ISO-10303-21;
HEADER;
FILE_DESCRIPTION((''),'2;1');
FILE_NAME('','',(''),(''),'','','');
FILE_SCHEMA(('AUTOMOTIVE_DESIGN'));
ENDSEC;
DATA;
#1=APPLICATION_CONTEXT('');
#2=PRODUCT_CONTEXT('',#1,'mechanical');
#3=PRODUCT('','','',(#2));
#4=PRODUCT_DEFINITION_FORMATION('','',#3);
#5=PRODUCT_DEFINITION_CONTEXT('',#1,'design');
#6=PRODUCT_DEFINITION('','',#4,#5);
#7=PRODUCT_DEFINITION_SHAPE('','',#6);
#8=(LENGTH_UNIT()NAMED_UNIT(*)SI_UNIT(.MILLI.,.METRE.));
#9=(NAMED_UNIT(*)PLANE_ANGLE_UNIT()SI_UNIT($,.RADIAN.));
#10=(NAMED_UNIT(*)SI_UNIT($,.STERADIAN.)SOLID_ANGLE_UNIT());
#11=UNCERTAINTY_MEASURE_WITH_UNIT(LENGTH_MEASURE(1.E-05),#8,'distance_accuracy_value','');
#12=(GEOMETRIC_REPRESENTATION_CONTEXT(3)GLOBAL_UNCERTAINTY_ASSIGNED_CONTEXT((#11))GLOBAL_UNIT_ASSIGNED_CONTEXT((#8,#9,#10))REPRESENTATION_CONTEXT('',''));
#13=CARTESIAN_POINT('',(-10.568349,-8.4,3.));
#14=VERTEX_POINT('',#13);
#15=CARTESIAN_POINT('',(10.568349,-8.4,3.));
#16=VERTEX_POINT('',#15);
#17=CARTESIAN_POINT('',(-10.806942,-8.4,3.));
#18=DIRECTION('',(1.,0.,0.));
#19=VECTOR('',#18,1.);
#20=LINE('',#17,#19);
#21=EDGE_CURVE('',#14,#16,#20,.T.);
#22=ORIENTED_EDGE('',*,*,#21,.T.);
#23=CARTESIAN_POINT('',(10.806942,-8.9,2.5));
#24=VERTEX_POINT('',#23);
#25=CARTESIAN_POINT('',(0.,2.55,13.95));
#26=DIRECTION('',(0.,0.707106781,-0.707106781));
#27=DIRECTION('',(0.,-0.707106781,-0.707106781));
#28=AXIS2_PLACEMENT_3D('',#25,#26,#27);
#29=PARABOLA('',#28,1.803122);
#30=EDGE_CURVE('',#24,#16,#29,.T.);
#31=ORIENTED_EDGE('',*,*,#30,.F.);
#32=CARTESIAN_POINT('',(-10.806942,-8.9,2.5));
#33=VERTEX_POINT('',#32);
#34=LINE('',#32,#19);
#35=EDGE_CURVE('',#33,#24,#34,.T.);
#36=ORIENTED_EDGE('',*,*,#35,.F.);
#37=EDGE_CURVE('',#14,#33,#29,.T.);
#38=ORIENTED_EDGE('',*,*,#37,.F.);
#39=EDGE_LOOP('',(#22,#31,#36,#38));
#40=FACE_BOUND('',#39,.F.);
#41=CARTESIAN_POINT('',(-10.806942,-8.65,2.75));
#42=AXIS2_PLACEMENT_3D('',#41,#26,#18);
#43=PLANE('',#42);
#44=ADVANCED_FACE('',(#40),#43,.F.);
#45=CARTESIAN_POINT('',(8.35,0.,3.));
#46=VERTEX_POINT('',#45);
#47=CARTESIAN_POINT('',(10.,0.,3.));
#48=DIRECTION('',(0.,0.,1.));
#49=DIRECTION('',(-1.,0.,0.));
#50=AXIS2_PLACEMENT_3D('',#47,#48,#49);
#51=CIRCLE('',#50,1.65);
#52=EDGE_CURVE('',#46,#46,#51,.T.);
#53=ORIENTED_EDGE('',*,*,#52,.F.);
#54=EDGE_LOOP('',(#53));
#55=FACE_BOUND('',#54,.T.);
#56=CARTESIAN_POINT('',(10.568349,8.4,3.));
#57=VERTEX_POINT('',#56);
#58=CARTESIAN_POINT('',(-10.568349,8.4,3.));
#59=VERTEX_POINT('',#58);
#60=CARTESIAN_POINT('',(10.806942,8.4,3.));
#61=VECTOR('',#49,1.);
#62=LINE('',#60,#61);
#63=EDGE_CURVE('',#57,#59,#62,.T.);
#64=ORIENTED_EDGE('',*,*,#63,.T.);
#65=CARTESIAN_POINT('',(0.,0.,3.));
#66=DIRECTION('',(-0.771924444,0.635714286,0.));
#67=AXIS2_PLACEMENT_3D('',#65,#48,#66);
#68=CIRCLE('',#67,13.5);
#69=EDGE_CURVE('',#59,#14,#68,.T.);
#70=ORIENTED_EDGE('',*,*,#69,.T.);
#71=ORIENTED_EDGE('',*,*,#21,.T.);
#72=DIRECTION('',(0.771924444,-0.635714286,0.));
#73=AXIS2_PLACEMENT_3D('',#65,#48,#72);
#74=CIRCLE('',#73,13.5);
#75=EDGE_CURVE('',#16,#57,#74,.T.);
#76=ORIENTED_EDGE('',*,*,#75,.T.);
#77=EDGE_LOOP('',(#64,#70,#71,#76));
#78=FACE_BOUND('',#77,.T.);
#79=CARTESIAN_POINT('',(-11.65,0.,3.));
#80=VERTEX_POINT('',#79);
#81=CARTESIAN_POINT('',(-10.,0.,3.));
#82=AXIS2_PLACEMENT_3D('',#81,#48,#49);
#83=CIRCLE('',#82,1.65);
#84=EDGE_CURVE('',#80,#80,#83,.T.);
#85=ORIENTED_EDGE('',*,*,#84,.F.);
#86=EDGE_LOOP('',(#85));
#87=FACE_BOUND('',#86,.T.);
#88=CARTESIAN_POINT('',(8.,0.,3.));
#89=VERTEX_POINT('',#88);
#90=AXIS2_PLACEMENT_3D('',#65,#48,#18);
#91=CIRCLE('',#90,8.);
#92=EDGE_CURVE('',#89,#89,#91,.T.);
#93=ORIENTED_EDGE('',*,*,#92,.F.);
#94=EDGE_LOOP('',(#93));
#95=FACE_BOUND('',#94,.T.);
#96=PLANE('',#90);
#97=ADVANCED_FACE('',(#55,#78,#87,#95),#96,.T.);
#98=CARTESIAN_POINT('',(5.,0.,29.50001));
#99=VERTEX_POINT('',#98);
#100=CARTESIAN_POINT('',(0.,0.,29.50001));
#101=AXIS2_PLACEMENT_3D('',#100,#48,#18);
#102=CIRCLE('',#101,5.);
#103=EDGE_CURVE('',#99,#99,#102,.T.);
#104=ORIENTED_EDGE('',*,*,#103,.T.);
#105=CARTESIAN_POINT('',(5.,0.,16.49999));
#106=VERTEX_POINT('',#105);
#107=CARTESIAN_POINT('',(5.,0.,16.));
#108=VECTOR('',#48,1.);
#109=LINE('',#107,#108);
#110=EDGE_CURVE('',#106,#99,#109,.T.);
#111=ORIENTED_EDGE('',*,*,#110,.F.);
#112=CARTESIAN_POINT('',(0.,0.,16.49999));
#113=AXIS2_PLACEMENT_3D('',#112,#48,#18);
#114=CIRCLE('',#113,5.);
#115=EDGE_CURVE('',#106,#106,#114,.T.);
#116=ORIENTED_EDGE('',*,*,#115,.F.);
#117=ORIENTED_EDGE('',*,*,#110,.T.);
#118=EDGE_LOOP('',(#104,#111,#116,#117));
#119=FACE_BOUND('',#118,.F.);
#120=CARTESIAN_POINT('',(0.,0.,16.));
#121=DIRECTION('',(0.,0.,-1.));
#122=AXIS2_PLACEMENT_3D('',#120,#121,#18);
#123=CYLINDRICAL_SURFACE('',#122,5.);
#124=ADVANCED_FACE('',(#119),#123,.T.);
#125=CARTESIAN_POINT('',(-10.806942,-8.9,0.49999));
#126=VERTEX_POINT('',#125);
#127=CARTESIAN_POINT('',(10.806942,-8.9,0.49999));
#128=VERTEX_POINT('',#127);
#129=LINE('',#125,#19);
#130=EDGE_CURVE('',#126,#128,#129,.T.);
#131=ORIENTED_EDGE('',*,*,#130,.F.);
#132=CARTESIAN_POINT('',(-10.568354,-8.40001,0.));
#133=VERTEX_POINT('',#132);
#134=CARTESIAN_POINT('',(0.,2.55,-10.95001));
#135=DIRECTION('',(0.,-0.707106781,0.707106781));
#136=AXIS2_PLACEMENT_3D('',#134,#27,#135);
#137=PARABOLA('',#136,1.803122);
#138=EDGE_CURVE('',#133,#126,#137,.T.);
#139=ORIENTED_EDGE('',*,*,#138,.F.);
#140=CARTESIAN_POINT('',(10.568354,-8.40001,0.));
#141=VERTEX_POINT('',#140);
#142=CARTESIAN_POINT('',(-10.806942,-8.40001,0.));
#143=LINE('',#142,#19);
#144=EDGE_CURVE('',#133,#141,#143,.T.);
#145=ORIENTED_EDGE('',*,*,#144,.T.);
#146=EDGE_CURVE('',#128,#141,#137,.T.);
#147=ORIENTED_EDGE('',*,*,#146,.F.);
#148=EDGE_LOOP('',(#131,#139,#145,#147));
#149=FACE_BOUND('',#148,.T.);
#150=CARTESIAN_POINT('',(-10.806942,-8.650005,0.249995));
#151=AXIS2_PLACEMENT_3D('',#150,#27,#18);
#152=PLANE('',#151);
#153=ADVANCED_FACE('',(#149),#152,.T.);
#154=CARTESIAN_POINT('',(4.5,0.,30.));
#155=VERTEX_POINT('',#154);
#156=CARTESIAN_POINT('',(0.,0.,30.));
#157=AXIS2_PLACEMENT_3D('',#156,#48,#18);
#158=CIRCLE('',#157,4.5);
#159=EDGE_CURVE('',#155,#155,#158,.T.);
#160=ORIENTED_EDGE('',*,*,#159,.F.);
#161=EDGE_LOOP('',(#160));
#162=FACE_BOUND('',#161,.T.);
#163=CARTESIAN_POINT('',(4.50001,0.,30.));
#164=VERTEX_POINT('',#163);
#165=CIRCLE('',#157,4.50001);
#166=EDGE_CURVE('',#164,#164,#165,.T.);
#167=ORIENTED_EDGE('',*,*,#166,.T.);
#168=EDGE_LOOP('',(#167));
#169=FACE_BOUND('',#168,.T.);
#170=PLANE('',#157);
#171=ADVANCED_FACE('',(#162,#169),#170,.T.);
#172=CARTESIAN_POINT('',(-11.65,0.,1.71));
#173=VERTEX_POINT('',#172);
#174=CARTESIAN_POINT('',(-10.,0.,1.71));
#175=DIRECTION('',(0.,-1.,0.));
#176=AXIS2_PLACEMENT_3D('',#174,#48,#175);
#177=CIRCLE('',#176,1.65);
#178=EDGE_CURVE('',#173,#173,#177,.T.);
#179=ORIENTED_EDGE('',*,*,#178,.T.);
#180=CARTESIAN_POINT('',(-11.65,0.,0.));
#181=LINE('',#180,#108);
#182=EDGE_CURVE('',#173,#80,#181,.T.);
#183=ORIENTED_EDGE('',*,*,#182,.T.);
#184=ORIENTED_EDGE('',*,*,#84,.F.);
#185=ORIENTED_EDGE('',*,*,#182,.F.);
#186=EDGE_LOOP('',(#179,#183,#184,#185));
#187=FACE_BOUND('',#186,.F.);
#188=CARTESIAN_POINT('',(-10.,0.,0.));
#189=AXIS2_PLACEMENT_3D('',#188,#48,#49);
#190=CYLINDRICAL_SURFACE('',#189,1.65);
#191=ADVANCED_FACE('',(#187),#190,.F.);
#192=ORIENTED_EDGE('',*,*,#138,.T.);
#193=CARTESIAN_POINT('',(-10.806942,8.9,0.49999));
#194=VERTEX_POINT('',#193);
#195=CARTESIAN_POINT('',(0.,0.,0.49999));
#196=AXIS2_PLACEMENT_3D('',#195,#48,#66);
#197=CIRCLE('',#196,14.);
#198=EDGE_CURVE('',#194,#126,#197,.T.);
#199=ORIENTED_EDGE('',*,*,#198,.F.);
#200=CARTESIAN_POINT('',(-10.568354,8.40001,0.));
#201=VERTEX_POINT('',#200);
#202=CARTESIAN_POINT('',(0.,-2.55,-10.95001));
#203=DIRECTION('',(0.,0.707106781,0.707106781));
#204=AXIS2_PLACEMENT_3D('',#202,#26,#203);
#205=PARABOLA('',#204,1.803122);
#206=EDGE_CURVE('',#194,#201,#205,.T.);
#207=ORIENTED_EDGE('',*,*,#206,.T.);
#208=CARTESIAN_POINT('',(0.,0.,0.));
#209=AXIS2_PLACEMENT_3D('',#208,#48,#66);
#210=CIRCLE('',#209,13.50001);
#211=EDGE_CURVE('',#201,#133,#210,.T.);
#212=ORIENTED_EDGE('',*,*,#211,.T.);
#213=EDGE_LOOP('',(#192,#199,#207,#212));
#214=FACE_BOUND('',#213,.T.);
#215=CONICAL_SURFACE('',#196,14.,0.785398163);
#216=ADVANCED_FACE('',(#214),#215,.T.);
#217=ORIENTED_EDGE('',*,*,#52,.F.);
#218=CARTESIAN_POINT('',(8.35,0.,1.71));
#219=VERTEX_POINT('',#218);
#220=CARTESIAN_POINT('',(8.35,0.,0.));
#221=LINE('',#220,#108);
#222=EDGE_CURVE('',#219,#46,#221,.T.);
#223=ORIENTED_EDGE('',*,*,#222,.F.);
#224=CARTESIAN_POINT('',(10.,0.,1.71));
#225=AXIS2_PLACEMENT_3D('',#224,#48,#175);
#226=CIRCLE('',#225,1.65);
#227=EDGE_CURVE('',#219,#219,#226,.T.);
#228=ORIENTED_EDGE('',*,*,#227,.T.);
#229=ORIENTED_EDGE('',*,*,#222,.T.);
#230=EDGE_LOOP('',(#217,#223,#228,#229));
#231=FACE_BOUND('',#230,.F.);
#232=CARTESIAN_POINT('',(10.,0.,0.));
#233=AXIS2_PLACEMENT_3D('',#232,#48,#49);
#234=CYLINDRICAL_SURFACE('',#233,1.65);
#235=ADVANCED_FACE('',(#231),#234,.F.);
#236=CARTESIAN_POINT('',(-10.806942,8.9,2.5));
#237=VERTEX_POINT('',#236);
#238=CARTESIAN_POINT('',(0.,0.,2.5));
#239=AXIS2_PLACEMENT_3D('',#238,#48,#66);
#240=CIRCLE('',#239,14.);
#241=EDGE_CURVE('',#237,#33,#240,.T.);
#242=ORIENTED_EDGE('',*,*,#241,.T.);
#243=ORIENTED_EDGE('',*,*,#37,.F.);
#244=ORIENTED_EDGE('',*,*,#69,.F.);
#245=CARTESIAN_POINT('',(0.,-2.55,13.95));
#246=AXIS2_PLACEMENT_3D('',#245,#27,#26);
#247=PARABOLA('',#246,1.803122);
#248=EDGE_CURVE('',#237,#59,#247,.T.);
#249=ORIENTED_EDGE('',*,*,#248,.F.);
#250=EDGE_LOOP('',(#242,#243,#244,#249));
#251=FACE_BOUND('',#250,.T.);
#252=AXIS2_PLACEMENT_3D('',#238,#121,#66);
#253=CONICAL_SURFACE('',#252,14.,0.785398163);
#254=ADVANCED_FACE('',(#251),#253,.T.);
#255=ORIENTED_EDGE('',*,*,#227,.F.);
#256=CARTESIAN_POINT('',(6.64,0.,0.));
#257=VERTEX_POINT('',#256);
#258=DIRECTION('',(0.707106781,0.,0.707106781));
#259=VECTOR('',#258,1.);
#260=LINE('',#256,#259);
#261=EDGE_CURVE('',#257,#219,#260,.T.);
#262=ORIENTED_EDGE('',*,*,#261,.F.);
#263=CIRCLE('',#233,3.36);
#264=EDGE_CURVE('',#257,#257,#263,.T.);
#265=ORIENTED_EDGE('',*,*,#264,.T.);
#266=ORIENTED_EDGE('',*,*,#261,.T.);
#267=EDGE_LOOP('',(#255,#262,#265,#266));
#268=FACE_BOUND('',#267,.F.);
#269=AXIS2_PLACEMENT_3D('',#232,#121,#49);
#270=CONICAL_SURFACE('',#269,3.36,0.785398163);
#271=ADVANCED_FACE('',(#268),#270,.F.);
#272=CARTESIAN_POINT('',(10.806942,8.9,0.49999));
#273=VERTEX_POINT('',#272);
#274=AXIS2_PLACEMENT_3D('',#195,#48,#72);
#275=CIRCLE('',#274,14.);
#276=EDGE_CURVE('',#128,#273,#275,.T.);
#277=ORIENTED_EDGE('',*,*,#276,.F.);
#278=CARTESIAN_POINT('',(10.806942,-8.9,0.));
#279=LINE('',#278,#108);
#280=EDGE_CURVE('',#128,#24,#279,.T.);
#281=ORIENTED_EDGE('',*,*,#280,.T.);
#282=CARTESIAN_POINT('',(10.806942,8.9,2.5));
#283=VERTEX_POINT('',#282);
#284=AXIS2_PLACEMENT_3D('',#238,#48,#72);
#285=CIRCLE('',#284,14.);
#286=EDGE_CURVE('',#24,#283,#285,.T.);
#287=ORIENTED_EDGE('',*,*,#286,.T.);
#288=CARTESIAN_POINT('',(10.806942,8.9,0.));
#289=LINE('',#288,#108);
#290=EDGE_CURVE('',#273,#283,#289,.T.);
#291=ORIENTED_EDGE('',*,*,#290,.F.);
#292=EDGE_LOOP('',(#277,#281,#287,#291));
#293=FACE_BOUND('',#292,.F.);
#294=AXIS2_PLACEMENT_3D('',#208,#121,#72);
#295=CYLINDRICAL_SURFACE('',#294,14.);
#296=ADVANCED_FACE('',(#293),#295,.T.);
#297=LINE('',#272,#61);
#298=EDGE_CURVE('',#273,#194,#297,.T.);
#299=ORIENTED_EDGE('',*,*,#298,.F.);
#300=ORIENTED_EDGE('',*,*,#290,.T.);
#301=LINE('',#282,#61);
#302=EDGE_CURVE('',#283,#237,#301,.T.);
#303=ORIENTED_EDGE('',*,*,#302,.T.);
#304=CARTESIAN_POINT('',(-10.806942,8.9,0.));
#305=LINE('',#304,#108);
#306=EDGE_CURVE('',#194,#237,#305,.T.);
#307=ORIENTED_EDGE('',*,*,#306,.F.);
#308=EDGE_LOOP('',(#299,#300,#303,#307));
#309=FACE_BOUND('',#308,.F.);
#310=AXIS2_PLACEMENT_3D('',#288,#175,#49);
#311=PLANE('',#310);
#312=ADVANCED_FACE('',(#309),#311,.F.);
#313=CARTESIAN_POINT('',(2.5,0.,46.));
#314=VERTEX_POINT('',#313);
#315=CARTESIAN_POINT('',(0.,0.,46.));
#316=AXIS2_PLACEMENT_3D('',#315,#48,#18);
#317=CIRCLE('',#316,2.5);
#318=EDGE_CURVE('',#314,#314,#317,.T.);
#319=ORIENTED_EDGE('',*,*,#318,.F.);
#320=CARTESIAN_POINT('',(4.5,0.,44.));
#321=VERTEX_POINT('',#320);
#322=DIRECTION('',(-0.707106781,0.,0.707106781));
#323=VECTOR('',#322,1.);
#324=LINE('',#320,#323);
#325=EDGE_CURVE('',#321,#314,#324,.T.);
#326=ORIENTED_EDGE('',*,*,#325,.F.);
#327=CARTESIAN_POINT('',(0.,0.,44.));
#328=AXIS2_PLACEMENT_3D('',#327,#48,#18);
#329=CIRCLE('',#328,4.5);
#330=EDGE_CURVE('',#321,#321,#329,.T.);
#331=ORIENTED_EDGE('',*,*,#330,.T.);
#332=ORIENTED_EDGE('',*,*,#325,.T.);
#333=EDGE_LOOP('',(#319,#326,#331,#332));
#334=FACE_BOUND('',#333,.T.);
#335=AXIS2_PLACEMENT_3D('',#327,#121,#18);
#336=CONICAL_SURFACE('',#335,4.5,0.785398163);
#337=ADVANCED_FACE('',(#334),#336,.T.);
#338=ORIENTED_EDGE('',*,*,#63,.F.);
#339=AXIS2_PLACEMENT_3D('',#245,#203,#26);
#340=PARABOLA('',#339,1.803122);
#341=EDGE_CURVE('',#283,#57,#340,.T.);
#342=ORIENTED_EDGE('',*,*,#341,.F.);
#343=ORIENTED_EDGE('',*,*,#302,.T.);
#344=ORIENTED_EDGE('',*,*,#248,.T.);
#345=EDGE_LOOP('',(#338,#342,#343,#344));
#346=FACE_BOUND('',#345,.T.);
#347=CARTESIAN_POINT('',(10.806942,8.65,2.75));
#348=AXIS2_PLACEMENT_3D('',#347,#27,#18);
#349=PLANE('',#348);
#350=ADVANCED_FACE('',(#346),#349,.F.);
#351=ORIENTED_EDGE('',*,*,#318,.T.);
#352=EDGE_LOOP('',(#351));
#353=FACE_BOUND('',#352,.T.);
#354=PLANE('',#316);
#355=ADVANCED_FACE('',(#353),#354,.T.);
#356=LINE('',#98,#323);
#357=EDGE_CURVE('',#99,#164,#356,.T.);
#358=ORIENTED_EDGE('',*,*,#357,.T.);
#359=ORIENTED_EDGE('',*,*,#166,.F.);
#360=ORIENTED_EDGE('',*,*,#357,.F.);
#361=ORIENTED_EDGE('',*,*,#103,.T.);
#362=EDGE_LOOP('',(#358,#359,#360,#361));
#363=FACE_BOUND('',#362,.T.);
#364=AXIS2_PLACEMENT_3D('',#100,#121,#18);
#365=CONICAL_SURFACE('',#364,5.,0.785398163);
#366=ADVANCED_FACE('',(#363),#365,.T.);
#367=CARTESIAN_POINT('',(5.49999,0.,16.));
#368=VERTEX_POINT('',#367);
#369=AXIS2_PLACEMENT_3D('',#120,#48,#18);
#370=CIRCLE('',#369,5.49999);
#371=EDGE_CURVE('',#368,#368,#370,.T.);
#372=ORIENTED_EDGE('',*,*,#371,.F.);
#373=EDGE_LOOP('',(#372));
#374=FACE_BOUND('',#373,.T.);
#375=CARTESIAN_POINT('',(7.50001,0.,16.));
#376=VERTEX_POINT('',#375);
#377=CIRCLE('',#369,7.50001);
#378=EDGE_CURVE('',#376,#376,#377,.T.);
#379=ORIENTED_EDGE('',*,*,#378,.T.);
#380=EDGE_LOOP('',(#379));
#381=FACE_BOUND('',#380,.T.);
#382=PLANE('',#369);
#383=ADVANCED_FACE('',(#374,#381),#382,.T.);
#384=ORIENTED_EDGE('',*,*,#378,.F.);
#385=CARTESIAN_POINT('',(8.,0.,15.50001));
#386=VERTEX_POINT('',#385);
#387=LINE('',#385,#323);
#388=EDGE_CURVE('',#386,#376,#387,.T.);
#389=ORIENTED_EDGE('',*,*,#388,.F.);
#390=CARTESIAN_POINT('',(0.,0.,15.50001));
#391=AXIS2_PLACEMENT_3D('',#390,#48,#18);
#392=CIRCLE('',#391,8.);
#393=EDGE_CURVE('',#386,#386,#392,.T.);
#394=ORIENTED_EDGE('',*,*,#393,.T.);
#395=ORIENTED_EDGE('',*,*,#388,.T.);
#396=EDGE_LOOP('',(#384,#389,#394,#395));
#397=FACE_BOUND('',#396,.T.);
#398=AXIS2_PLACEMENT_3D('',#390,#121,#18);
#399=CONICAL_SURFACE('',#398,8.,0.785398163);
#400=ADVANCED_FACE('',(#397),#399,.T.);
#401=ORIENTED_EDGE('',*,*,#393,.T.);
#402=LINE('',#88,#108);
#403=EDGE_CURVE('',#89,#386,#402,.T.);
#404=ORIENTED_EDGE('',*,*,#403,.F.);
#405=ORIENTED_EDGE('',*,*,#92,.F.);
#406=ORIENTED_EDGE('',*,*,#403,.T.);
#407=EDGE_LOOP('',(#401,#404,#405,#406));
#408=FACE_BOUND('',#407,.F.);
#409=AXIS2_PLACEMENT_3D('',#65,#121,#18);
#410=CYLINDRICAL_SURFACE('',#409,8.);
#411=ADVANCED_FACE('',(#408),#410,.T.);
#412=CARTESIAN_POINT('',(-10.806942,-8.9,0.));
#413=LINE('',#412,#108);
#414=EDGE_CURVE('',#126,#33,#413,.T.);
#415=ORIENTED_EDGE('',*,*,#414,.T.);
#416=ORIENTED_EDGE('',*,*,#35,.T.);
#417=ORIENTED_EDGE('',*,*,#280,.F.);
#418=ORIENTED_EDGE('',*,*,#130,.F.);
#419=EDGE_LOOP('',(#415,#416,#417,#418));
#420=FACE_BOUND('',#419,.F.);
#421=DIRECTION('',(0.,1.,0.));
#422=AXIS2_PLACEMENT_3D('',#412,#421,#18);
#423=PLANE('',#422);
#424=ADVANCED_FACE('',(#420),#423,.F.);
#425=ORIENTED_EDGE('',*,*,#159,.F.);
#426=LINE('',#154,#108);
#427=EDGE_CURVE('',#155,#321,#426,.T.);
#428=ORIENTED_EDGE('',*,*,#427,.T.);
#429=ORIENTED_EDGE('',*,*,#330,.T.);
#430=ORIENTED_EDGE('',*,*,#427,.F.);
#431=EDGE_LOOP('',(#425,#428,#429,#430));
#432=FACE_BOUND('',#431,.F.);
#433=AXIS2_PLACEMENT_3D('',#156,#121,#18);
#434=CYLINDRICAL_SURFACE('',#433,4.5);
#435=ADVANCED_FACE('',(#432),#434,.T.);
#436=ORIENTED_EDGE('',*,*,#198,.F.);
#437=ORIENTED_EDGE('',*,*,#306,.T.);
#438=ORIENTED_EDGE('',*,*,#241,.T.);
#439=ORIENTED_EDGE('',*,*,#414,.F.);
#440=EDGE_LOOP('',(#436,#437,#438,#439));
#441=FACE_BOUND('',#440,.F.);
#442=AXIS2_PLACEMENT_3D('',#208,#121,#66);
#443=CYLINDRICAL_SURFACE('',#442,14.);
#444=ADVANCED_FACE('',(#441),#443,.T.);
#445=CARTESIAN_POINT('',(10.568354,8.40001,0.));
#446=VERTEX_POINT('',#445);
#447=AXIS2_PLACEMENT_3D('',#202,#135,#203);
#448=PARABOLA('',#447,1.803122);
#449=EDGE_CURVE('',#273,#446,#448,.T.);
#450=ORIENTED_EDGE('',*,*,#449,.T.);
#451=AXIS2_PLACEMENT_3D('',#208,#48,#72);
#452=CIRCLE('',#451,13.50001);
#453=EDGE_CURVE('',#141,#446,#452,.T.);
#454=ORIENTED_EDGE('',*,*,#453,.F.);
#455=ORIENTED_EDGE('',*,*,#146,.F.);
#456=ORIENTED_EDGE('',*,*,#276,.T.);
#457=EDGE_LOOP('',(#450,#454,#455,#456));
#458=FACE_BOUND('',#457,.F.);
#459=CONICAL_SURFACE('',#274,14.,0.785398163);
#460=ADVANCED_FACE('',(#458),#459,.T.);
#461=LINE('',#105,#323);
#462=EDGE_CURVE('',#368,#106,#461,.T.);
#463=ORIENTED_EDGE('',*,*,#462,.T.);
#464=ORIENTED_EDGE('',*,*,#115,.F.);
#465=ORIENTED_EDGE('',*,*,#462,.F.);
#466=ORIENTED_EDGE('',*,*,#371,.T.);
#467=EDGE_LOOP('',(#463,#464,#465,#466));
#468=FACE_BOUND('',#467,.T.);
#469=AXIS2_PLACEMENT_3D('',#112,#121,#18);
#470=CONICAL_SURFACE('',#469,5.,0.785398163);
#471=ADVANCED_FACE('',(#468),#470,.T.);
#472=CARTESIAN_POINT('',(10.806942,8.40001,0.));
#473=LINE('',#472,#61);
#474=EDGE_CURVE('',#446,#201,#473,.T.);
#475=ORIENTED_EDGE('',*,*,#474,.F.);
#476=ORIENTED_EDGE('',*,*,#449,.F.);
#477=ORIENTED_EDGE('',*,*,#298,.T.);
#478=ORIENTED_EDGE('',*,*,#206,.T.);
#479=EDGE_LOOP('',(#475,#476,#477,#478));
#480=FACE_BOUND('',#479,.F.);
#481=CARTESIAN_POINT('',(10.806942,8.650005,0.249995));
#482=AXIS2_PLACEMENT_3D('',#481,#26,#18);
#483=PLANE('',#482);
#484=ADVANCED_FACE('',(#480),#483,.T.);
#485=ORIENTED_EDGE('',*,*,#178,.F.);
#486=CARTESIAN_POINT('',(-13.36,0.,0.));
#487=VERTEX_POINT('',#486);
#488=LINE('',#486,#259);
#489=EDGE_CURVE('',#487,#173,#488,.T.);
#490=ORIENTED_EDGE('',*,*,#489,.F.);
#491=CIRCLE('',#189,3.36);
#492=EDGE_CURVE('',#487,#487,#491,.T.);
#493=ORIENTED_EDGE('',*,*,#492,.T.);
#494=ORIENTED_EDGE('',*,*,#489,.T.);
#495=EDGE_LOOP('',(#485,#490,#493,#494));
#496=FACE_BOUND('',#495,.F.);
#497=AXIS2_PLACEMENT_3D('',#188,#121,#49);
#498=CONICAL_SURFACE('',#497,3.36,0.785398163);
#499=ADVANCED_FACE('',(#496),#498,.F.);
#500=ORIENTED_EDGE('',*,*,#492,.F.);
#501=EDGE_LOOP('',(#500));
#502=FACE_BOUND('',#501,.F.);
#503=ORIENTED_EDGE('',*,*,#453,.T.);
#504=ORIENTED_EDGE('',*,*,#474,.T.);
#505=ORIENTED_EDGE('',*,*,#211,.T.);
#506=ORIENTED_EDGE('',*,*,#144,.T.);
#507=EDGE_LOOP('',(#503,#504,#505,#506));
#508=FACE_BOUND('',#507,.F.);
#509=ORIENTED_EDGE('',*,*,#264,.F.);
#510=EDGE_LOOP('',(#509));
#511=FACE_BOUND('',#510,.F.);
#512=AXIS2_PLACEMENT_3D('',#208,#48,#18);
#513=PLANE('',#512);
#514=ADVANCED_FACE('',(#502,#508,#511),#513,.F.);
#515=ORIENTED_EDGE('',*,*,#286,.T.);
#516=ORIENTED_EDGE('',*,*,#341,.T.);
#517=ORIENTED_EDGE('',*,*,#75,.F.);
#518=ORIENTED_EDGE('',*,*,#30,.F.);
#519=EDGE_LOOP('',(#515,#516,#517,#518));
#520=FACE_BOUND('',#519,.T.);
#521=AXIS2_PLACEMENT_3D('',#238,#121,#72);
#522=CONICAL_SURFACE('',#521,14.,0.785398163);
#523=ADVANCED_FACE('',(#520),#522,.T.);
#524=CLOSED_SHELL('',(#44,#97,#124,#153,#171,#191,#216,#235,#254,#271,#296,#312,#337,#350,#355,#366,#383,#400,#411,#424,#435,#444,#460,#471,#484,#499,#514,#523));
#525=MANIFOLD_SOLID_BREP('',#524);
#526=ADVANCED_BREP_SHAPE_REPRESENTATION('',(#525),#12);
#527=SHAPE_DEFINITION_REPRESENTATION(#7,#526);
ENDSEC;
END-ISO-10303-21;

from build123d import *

# Parameters (mm, degrees)
F1_DEPTH       = 3
F3_D           = 3.3
F3_CSINK_D     = 6.72
F3_CSINK_ANGLE = 90
F4_R           = 8
F5_DEPTH       = 13
F6_SIZE2       = 0.5
F6_SIZE        = 0.5
F7_R           = 5
F8_DEPTH       = 14
F9_R           = 4.5
F10_DEPTH      = 16
F11_SIZE2      = 0.49999
F11_SIZE       = 0.49999
F12_SIZE2      = 2
F12_SIZE       = 2


# Not quite as in the source:
# - a fillet or chamfer is up to 0.001 mm smaller than in the source, because OpenCascade refuses the exact size


with BuildPart() as f1:
    # F0 (on Top) → F1 (new body)
    with BuildSketch(Plane.XY):
        with BuildLine():
            Line((10.8069422132, 8.9), (-10.8069422132, 8.9))
            ThreePointArc((-10.8069422132, 8.9), (-14, 0), (-10.8069422132, -8.9))
            Line((-10.8069422132, -8.9), (10.8069422132, -8.9))
            ThreePointArc((10.8069422132, -8.9), (14, 0), (10.8069422132, 8.9))
        make_face()
    extrude(amount=F1_DEPTH)

    # F3 (through all)
    with Locations(Plane(origin=(0, 0, 0), x_dir=(1, 0, 0), z_dir=(0, 0, -1))):
        with Locations((-10, 0), (10, 0)):
            CounterSinkHole(F3_D / 2, F3_CSINK_D / 2, counter_sink_angle=F3_CSINK_ANGLE)

    # F4 (on face) → F5 (join)
    with BuildSketch(Plane.XY.offset(3)):
        Circle(F4_R)
    extrude(amount=F5_DEPTH)

    # F6
    f6_edges = [f1.edges().sort_by_distance(p)[0] for p in [
        (0, 8.9, 3),
        (14, 0, 3),
        (0, -8.9, 3),
        (-14, 0, 3),
    ]]
    chamfer(f6_edges, length=F6_SIZE, length2=F6_SIZE2)

    # F7 (on face) → F8 (join)
    with BuildSketch(Plane.XY.offset(16)):
        Circle(F7_R)
    extrude(amount=F8_DEPTH)

    # F9 (on face) → F10 (join)
    with BuildSketch(Plane.XY.offset(30)):
        Circle(F9_R)
    extrude(amount=F10_DEPTH)

    # F11 (size 0.5 and 0.5 in the source; OpenCascade refuses exactly that, so slightly less here)
    f11_edges = [f1.edges().sort_by_distance(p)[0] for p in [
        (-5, 0, 30),
        (-8, 0, 16),
        (-5, 0, 16),
        (0, 8.9, 0),
        (14, 0, 0),
        (-14, 0, 0),
        (0, -8.9, 0),
    ]]
    chamfer(f11_edges, length=F11_SIZE, length2=F11_SIZE2)

    # F12
    f12_edges = [f1.edges().sort_by_distance(p)[0] for p in [
        (-4.5, 0, 46),
    ]]
    chamfer(f12_edges, length=F12_SIZE, length2=F12_SIZE2)


solid = f1.part
